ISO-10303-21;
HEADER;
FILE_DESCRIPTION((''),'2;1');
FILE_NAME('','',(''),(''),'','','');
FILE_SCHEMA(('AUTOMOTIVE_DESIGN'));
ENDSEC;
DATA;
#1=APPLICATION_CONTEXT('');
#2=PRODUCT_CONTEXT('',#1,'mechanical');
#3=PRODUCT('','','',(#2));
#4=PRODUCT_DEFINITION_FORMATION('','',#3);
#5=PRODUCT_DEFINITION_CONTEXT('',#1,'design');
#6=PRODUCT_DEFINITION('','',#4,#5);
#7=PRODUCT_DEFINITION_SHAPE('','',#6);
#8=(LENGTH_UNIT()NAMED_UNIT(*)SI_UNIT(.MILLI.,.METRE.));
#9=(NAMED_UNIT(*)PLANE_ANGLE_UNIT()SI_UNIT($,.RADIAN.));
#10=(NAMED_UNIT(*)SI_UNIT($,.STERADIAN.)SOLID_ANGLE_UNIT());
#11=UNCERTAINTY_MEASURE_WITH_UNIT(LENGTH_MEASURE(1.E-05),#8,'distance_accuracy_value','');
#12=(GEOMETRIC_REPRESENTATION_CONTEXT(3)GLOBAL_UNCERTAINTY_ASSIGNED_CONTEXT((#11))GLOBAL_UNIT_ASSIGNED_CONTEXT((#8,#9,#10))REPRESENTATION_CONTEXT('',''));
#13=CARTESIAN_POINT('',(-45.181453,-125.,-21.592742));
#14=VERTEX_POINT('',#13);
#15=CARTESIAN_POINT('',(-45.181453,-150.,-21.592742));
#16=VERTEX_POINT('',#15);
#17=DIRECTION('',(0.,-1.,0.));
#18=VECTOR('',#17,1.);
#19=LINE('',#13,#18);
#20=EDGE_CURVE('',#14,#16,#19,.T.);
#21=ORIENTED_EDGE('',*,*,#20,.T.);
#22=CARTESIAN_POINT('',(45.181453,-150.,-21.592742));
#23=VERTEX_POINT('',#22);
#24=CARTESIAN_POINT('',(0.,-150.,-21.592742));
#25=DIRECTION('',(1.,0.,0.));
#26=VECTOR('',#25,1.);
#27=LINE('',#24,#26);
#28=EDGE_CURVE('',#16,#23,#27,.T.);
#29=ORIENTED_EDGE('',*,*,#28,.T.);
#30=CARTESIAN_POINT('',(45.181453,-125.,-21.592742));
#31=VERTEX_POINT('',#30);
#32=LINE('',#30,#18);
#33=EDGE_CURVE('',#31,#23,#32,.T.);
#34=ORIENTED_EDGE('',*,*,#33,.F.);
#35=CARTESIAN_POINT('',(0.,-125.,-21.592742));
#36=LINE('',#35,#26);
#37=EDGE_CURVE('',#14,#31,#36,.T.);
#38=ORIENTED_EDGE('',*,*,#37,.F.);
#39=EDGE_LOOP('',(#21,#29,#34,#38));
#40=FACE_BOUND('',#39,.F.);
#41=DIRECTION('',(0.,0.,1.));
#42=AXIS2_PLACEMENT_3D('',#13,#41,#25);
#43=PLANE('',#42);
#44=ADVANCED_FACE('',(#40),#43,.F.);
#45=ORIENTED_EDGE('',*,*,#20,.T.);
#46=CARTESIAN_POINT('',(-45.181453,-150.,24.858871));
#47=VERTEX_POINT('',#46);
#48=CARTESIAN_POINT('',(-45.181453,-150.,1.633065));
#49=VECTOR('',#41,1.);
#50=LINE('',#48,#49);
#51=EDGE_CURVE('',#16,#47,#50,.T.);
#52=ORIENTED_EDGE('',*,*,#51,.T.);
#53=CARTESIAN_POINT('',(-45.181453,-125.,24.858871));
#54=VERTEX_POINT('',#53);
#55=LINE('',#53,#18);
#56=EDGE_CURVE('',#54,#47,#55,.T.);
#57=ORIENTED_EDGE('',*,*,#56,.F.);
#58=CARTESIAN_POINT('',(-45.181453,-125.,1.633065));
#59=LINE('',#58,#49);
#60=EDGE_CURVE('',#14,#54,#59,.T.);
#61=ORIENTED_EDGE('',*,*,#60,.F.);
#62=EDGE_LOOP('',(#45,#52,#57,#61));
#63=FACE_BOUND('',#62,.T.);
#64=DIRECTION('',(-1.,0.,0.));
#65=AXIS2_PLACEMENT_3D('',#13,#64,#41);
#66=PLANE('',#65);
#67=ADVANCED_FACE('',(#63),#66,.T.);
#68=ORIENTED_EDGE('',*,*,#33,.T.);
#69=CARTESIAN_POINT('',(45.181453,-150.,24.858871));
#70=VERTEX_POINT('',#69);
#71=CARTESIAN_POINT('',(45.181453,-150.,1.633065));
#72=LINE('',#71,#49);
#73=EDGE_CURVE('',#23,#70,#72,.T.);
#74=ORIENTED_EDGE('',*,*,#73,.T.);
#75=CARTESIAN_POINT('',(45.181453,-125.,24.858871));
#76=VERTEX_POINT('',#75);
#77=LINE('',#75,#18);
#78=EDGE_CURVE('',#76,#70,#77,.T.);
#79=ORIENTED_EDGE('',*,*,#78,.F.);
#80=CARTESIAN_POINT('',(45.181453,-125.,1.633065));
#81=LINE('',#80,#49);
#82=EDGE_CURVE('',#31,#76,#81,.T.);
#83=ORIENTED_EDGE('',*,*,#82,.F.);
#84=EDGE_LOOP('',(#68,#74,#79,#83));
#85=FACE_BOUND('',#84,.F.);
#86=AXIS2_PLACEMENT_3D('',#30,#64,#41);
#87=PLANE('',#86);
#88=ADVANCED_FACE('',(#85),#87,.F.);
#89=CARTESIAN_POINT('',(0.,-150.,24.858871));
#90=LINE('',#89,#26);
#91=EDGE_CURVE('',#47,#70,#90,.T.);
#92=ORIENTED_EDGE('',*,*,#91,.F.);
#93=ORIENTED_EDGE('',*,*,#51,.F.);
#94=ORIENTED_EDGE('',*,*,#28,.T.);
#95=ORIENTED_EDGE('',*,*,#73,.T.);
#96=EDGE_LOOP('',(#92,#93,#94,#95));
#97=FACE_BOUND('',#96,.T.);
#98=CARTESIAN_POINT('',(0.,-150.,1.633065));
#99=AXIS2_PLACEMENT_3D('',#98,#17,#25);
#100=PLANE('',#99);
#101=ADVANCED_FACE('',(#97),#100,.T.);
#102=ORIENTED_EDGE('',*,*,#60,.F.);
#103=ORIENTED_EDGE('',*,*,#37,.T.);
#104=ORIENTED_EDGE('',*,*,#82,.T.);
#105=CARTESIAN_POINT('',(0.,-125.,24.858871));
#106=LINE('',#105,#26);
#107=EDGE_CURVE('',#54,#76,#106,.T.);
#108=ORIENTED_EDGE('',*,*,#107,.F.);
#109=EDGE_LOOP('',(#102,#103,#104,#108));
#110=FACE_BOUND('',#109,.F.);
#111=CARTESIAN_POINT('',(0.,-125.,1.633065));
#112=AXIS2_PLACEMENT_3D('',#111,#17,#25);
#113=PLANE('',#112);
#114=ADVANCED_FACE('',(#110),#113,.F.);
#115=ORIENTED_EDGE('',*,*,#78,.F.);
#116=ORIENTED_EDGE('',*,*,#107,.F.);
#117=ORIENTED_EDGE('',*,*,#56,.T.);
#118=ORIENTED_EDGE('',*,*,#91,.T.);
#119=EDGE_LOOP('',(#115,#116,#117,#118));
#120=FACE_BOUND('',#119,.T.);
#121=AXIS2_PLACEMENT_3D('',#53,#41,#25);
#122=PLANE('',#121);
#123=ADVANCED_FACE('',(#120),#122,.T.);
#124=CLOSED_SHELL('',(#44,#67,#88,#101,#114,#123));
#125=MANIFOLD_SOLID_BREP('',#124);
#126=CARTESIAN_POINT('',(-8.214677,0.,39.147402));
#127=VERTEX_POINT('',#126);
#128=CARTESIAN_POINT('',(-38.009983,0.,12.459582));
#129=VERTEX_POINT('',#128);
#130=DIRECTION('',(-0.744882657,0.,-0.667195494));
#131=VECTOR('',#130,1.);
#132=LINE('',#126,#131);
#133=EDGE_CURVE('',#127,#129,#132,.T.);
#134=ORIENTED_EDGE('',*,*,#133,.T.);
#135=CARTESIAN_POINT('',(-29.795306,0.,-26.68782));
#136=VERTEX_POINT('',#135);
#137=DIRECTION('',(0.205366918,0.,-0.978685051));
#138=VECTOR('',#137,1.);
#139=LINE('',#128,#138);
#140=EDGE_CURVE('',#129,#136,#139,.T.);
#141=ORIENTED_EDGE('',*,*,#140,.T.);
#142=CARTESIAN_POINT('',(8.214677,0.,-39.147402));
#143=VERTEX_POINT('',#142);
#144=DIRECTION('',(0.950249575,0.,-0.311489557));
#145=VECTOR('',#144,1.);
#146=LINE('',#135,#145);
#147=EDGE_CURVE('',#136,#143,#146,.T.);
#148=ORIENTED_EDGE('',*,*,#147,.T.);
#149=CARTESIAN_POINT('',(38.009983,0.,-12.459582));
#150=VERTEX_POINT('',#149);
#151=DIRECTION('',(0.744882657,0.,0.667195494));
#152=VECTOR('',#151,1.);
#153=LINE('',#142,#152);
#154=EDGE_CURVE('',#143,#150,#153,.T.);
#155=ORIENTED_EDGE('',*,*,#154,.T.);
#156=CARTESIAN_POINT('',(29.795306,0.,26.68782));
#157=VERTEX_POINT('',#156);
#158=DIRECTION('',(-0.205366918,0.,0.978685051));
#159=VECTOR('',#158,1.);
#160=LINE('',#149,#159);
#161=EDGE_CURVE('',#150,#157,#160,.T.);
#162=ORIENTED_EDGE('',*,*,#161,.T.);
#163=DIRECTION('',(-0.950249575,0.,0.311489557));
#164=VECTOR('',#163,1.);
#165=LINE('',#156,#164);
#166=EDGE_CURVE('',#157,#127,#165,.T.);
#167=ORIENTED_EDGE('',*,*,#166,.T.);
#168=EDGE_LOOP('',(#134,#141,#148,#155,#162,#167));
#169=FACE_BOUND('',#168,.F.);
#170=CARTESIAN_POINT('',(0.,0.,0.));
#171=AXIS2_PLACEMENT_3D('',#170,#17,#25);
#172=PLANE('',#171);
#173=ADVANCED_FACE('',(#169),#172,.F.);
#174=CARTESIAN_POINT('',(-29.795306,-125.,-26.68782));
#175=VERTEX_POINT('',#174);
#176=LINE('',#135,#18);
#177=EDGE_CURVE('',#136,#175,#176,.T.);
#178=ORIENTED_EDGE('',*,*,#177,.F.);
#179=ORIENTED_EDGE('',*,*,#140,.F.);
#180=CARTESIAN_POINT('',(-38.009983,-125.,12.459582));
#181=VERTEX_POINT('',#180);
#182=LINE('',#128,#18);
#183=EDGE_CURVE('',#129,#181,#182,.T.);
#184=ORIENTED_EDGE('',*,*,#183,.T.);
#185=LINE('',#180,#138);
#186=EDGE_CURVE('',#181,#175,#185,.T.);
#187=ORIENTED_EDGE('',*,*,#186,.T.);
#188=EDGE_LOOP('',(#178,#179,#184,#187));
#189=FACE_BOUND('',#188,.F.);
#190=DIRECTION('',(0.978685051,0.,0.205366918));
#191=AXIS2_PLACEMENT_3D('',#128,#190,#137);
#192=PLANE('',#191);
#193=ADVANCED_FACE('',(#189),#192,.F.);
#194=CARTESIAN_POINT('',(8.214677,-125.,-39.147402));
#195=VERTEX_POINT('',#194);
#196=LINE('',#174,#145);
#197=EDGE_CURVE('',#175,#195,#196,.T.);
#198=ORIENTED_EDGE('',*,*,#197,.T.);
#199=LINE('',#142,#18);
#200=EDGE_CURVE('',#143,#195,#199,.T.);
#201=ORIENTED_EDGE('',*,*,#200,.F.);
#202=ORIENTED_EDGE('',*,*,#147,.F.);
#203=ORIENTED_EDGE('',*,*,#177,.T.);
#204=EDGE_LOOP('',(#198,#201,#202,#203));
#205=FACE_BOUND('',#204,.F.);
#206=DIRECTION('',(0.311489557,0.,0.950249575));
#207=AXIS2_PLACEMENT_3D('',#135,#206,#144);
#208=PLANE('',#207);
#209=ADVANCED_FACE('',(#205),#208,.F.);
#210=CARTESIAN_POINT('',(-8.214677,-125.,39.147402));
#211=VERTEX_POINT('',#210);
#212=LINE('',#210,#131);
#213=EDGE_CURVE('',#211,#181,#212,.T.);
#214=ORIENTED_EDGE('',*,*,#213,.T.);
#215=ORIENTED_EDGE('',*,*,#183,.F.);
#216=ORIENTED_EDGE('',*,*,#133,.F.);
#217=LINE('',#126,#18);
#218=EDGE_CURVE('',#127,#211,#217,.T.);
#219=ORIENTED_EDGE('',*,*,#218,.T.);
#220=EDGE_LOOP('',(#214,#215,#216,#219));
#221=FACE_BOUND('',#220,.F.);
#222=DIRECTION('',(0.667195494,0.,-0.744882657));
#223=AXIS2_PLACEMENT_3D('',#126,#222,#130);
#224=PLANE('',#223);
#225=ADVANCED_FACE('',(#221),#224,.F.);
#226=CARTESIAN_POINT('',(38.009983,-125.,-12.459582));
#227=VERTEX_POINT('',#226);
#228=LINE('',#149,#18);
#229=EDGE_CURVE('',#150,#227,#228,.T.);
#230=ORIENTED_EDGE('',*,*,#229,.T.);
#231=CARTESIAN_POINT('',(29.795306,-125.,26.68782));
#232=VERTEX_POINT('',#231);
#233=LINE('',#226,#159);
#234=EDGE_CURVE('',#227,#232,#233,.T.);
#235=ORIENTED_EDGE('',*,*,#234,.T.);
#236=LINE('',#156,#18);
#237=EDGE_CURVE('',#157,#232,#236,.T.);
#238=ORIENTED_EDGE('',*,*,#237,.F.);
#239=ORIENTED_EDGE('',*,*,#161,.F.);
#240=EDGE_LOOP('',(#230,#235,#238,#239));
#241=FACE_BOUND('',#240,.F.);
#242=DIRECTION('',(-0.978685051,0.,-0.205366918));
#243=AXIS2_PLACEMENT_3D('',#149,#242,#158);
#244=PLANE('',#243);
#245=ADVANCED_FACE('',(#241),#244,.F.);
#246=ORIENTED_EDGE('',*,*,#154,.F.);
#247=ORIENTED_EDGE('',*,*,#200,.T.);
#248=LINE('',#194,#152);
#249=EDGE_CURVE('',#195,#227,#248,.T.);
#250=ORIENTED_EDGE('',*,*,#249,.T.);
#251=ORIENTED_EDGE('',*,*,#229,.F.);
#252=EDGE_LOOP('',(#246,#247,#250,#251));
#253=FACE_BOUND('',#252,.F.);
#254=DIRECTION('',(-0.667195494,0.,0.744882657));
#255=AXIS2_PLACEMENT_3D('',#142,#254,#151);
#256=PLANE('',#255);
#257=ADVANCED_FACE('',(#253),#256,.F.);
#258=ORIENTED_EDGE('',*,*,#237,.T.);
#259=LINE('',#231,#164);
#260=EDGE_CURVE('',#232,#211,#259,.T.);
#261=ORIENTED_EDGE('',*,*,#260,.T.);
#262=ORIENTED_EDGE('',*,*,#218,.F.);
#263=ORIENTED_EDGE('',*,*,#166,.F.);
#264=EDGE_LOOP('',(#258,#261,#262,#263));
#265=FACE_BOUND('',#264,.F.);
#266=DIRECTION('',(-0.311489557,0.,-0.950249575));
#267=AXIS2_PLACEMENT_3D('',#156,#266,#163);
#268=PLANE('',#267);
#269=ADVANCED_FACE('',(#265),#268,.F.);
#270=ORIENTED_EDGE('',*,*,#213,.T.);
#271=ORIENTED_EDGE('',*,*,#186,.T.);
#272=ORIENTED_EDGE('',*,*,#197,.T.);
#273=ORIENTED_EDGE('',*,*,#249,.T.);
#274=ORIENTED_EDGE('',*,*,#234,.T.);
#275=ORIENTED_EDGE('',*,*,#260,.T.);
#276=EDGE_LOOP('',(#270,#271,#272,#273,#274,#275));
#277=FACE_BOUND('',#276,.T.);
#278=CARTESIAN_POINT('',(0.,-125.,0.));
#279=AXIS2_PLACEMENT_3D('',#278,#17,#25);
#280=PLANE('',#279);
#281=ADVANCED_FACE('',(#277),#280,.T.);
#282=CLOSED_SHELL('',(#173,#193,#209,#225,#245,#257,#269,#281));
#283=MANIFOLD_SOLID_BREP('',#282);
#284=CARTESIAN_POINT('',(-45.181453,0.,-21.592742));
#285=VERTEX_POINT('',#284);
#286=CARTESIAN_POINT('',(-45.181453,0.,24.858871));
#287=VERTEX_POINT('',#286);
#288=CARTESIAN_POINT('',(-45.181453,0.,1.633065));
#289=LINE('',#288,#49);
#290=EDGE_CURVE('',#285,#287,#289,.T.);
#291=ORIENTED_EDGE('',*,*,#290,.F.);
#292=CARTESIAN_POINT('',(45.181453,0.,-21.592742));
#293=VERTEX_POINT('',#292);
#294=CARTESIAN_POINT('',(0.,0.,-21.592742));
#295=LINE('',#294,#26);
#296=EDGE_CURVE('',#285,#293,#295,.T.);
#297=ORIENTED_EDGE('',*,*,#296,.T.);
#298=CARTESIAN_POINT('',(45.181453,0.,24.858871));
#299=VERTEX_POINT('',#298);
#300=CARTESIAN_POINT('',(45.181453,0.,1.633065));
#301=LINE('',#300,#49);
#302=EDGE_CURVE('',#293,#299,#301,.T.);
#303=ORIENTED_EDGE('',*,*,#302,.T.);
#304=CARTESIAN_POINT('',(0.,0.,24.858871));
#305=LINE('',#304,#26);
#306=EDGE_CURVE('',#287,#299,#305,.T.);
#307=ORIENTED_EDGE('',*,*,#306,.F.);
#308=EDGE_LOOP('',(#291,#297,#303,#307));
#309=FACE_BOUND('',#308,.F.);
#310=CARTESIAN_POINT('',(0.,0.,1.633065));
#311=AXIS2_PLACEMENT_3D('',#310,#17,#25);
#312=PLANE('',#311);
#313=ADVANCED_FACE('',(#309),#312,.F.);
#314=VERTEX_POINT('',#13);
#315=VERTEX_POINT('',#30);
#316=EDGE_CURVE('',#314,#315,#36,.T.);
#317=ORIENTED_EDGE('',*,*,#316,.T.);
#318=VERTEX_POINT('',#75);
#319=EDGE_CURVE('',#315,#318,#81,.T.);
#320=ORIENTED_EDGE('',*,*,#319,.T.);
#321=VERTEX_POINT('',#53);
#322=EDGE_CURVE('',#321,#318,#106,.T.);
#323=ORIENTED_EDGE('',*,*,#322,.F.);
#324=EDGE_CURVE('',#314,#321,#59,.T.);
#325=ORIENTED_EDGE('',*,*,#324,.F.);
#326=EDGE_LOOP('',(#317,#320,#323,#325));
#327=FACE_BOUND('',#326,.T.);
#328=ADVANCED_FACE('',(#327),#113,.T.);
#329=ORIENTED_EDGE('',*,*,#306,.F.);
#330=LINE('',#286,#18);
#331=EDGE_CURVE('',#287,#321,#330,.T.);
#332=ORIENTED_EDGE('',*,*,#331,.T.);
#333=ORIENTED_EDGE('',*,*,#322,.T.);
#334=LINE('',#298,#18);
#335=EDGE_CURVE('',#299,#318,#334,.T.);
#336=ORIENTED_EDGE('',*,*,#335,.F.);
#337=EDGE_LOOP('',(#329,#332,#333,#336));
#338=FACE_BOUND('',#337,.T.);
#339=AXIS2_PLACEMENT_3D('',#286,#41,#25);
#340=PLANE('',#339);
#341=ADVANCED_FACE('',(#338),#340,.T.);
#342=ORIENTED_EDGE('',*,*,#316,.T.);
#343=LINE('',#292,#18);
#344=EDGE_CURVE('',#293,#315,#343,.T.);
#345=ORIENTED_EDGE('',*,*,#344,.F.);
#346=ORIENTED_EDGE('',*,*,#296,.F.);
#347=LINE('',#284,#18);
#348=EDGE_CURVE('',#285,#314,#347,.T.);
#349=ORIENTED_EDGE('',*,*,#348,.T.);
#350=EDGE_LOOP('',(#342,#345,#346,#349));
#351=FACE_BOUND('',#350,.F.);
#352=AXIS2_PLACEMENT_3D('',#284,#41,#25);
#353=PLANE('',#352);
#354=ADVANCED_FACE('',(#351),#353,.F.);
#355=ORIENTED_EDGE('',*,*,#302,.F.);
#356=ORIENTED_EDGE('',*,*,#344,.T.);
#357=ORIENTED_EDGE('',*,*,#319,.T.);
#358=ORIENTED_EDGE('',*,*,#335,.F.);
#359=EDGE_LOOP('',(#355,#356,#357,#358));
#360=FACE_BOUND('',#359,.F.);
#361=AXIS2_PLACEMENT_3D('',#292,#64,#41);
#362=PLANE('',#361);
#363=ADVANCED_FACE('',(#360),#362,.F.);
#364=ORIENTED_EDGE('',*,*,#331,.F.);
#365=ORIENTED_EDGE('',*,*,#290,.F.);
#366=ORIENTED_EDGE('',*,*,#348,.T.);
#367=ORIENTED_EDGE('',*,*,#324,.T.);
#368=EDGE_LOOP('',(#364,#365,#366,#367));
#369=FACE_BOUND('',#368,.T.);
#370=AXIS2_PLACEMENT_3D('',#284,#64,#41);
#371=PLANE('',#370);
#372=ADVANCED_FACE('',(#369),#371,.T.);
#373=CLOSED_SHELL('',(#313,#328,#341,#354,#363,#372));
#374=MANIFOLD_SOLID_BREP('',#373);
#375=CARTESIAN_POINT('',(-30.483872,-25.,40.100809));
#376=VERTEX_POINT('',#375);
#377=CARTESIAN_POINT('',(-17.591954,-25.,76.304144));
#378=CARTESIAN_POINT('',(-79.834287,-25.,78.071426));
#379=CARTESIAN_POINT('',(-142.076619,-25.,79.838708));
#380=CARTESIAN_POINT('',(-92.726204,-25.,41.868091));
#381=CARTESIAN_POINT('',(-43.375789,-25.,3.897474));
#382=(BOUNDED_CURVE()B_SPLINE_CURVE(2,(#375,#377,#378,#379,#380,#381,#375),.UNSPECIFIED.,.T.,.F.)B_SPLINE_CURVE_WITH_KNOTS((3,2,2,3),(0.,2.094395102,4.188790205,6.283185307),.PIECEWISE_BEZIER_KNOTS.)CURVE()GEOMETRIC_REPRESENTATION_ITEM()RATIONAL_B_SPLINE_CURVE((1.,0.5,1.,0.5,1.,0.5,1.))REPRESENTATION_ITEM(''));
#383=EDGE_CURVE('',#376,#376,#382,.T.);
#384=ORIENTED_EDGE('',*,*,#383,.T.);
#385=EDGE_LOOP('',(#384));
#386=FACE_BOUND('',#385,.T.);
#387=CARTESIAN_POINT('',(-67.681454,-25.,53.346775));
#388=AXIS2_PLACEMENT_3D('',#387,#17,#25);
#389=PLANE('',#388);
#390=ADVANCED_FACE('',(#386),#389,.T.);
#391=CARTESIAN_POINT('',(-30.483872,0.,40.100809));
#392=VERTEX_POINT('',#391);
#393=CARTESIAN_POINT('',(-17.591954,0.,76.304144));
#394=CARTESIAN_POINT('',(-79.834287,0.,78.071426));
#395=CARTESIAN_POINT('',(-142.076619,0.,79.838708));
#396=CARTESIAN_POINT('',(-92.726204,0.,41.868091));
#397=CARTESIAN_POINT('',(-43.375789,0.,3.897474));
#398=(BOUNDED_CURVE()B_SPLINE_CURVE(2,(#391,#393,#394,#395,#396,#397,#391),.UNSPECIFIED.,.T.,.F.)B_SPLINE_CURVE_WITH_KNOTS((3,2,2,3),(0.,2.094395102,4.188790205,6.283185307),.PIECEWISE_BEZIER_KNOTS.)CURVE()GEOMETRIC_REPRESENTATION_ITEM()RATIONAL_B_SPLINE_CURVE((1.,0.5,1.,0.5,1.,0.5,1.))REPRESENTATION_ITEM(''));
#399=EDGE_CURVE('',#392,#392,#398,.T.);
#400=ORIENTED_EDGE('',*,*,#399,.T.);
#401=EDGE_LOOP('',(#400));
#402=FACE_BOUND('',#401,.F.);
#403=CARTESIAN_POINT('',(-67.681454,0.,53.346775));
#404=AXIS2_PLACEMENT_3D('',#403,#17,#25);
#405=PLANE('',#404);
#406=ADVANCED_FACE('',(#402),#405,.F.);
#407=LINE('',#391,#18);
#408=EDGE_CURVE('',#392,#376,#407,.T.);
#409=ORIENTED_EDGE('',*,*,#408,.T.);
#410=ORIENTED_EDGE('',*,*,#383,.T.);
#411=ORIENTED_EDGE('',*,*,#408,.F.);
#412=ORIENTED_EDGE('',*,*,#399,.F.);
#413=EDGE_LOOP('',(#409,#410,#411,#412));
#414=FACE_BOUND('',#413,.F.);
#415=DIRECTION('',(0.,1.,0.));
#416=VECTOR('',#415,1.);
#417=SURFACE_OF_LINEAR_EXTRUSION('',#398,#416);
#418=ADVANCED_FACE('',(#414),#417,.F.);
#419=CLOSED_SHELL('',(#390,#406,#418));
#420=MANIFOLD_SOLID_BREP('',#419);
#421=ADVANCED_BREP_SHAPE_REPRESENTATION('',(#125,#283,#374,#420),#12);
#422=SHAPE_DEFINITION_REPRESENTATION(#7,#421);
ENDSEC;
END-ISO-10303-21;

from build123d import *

# Parameters (mm, degrees)
F2_DEPTH = 125
F1_W     = 90.362906456
F1_H     = 46.4516137727
F3_DEPTH = 25
F5_DEPTH = 25


with BuildPart() as f2:
    # F0 (on Front) → F2 (new body)
    with BuildSketch(Plane.XZ):
        Polygon((-8.2146767203, 39.1474020387), (-38.0099830178, 12.4595822957), (-29.7953062975, -26.687819743), (8.2146767203, -39.1474020387), (38.0099830178, -12.4595822957), (29.7953062975, 26.687819743), align=None)
    extrude(amount=F2_DEPTH)


with BuildPart() as f2b:
    # F1 (on Front) → F2, piece 2 (new body)
    with BuildSketch(Plane.XZ):
        with Locations((0, 1.6330645885)):
            Rectangle(F1_W, F1_H)
    extrude(amount=F2_DEPTH)


with BuildPart() as f3:
    # F3 (new): a face of the model
    f3_faces = [f2b.part.faces().sort_by_distance(p)[0] for p in [
        (0, -125, 1.6330645885),
    ]]
    extrude(f3_faces, amount=F3_DEPTH)


with BuildPart() as f5:
    # F4 (on Front) → F5 (new body)
    with BuildSketch(Plane.XZ):
        with BuildLine():
            add(Edge.make_bspline(
                [(-30.4838716984, 40.1008091867), (-17.591954486, 76.3041440565), (-79.8342867277, 78.0714260498), (-142.0766189694, 79.8387080431), (-92.7262039401, 41.86809118), (-43.3757889108, 3.8974743169), (-30.4838716984, 40.1008091867)],
                knots=[0, 0, 0, 2.0943951024, 2.0943951024, 4.1887902048, 4.1887902048, 6.2831853072, 6.2831853072, 6.2831853072], degree=2, weights=[1, 0.5, 1, 0.5, 1, 0.5, 1]))
        make_face()
    extrude(amount=F5_DEPTH)


solid = Compound([f2.part, f2b.part, f3.part, f5.part])
